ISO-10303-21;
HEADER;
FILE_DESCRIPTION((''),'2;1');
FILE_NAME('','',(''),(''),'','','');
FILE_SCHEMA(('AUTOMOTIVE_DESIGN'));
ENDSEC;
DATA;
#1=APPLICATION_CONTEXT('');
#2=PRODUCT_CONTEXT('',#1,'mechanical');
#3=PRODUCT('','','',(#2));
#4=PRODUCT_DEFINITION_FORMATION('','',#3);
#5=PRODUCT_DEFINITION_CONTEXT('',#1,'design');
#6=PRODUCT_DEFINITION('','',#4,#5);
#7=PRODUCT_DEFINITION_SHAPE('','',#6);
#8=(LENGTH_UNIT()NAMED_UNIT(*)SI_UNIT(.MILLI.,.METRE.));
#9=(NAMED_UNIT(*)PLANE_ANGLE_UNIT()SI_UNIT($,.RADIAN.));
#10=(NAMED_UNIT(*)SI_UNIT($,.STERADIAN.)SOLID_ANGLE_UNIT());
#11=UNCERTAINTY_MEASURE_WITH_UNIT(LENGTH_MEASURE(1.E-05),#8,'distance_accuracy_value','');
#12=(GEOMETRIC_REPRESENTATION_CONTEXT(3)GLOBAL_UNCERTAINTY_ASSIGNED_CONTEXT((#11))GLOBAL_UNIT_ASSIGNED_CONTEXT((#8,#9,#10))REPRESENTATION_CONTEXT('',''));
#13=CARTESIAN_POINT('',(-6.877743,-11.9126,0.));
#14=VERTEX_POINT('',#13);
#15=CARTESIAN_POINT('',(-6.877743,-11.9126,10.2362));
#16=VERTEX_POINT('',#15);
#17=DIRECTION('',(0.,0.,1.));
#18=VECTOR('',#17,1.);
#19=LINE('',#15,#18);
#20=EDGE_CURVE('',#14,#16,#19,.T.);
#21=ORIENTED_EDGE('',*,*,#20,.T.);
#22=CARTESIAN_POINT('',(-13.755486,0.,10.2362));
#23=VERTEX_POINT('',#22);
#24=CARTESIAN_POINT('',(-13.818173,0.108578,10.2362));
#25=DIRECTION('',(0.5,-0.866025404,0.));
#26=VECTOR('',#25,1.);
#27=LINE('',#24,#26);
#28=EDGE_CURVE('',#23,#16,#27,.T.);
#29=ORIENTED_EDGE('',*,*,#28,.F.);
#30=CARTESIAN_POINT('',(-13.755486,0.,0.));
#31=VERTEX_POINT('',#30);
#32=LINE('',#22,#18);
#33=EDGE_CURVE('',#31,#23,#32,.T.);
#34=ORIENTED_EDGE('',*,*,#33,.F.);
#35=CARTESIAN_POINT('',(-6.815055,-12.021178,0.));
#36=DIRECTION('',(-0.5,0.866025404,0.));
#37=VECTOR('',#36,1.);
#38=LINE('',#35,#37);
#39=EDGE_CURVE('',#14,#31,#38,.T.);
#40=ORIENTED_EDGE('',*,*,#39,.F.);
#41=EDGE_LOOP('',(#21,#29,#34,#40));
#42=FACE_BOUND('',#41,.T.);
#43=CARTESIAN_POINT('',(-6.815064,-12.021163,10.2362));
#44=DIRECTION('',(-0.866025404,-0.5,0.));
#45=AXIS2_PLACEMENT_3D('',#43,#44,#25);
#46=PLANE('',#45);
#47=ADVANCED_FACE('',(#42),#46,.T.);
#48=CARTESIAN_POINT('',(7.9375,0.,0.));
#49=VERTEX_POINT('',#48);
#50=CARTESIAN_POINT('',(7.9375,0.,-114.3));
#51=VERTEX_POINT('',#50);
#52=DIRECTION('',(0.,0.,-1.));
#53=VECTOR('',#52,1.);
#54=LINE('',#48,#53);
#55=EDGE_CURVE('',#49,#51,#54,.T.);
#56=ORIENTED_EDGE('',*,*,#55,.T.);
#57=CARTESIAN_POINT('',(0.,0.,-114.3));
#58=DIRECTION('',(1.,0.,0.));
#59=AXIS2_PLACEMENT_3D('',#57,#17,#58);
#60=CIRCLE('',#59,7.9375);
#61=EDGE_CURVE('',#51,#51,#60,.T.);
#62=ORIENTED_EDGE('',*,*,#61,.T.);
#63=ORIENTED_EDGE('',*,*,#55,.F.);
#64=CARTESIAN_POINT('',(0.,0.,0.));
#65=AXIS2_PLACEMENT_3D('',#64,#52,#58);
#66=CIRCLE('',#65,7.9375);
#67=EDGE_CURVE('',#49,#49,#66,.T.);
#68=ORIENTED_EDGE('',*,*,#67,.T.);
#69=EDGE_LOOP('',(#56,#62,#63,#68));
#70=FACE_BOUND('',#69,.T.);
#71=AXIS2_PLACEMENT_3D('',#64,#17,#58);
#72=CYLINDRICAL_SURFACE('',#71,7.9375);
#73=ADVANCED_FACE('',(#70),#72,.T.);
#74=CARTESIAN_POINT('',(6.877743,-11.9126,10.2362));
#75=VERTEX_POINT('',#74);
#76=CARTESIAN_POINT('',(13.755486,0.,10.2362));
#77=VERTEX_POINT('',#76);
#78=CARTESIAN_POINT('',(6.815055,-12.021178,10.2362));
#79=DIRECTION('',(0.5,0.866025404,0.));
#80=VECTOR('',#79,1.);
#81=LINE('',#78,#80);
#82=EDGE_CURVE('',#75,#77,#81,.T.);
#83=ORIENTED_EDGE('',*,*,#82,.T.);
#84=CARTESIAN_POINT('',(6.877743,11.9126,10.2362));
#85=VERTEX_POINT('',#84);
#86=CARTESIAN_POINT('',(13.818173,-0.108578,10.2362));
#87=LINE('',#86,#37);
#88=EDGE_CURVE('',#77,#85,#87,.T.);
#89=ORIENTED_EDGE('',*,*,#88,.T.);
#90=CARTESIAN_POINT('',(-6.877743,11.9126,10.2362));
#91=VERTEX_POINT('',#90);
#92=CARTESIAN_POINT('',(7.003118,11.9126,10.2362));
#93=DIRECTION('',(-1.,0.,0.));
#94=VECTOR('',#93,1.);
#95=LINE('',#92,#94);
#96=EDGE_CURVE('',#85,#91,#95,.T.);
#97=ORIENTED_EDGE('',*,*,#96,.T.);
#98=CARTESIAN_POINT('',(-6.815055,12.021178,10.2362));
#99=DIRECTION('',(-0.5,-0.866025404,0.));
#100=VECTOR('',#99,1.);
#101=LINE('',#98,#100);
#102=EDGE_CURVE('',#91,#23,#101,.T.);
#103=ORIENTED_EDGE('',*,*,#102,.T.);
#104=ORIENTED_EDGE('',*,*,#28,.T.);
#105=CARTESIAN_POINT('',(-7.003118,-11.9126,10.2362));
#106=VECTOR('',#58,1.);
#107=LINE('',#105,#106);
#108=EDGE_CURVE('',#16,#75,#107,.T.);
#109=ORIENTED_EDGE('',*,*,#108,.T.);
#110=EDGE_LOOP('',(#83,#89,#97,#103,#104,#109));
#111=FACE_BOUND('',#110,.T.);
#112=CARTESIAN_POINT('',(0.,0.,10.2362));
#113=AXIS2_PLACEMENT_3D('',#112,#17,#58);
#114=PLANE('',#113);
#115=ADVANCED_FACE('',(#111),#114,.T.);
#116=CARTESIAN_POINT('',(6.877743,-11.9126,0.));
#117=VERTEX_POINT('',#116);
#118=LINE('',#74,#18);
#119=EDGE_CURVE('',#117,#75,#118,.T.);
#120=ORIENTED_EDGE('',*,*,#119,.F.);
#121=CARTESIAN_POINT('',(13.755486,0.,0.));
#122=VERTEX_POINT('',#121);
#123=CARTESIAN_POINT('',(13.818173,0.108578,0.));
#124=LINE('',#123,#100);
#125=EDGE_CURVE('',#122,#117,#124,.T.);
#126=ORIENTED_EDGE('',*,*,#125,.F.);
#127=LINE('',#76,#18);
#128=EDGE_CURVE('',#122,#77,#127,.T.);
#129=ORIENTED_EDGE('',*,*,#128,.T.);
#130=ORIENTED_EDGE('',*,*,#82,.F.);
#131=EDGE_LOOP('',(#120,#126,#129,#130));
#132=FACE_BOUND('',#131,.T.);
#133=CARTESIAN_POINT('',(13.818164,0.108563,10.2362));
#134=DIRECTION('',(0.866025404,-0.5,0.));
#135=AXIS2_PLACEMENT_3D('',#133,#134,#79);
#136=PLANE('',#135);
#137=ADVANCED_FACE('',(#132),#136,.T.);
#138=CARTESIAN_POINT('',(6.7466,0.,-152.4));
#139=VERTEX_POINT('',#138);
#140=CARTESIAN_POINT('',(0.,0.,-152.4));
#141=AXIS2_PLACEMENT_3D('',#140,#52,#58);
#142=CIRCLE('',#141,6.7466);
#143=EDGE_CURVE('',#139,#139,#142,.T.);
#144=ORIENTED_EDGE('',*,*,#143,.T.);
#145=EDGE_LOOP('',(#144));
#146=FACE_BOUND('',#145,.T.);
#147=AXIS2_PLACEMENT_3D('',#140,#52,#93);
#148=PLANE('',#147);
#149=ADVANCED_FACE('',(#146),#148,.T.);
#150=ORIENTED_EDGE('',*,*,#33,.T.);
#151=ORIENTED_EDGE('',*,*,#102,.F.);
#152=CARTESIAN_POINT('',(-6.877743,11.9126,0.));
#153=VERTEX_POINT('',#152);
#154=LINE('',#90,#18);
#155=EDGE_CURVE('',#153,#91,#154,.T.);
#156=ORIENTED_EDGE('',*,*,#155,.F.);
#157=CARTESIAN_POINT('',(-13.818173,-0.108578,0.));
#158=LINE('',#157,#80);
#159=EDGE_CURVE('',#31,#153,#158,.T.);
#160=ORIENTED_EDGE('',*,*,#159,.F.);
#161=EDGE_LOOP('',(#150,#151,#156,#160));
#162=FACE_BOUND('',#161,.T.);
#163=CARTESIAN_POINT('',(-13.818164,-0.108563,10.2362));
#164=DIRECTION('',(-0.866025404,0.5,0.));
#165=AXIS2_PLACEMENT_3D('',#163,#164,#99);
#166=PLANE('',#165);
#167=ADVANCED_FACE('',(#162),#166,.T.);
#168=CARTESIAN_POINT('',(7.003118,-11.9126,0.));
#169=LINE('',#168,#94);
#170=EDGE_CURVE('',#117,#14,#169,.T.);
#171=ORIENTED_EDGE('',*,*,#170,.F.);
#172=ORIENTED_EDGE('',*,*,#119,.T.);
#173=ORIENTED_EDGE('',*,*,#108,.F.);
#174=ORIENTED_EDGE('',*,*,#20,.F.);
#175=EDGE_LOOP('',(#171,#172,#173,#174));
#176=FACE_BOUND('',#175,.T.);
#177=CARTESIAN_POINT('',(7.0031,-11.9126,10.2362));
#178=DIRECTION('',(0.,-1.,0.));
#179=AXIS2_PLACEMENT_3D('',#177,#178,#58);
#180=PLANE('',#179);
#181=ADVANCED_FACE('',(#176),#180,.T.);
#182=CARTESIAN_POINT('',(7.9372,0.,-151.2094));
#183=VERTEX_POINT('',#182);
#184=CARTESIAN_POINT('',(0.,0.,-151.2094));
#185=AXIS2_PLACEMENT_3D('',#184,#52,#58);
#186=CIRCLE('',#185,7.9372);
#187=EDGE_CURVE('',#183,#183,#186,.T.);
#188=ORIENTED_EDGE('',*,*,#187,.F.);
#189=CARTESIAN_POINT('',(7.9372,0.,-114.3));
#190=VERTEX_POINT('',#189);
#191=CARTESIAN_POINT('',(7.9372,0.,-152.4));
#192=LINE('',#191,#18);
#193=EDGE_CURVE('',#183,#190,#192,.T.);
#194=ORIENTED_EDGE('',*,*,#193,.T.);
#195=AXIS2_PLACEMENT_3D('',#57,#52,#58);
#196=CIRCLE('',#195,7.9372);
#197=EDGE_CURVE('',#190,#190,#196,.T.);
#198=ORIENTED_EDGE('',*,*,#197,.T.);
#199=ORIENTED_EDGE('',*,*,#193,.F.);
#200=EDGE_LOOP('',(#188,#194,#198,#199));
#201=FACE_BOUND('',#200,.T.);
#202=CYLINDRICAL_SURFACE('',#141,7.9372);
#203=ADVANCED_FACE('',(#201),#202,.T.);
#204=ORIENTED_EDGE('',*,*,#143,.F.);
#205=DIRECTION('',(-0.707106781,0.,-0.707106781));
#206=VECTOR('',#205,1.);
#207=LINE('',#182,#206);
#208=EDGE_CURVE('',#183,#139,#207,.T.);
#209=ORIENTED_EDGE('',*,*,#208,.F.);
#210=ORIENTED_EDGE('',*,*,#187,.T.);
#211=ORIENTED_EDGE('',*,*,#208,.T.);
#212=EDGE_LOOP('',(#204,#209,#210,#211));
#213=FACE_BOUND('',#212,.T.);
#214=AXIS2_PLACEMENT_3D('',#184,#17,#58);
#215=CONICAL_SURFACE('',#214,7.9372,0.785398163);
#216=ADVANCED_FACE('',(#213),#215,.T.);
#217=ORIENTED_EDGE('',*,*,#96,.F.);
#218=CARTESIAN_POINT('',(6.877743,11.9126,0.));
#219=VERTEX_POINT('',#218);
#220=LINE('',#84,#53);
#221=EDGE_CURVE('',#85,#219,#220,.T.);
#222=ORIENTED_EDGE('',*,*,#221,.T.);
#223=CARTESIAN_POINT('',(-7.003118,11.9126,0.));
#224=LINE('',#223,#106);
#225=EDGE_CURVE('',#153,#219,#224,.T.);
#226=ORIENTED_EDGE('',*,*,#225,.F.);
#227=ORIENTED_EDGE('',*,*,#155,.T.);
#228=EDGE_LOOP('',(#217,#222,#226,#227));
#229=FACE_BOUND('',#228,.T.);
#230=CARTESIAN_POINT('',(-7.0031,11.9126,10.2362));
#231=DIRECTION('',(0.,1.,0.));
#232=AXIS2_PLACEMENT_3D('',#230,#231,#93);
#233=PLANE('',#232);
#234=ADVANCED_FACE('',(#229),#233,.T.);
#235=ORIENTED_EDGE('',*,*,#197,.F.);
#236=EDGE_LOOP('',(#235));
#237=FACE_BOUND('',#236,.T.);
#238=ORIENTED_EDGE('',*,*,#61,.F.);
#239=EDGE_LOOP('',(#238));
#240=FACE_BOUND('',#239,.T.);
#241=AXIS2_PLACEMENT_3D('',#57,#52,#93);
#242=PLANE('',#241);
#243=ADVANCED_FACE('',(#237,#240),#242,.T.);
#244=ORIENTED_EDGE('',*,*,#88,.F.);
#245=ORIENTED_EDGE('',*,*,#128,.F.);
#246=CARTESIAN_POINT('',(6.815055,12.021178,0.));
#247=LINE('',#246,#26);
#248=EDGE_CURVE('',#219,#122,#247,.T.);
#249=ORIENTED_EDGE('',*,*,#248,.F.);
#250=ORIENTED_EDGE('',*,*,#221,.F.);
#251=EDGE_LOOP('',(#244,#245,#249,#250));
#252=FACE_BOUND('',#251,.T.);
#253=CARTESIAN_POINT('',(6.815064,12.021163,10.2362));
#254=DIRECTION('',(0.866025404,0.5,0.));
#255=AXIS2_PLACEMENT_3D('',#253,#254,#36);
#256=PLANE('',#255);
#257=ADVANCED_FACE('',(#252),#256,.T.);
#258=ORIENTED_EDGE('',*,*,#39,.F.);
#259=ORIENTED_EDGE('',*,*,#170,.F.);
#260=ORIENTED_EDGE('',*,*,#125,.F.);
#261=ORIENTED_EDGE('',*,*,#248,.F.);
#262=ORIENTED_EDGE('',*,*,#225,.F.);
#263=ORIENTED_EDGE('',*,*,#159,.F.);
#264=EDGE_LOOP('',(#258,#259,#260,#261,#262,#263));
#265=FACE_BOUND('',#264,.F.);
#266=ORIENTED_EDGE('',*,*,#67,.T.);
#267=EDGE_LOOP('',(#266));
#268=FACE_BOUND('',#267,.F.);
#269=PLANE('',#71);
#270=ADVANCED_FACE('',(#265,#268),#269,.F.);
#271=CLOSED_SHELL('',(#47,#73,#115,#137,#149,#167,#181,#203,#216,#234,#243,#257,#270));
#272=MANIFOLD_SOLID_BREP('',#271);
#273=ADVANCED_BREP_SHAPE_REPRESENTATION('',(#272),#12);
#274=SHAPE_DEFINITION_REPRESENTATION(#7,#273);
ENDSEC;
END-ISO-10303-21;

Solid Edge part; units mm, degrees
sketch "Sketch1" plane through (0, 0, 0) normal (0, 0, 1) x (1, 0, 0)
  circle A0 centre (0, 0) radius 13.8186
  dimension "D1" = 27.6372
extrude "Protrusion1" add sketch "Sketch1" along normal blind 10.2362
sketch "Sketch2" plane through (0, 0, 0) normal (0, 0, -1) x (1, 0, 0)
  circle A0 centre (0, 0) radius 7.9375
extrude "Protrusion2" add sketch "Sketch2" along normal blind 152.4
sketch "Sketch3" plane through (0, 0, -152.4) normal (0, 0, -1) x (1, 0, 0)
  circle A0 centre (0, 0) radius 7.9372
extrude "Cutout1" cut sketch "Sketch3" against normal blind 38.1 flip side to cut
chamfer "Chamfer_1" distance 1.1906 angle 45 1 edges at (-7.9372, 0, -152.4)
sketch "Sketch4" plane through (0, 0, 10.2362) normal (0, 0, 1) x (1, 0, 0)
  line L0 (-7.0031, 11.9126) -> (7.0031, 11.9126)
  dimension "D1" = 23.8252
extrude "Cutout2" cut sketch "Sketch4" against normal up to next material side at (0, 11.9626, 10.2362)
pattern_circular "Pattern1" count 6 over 360 about axis through (0, 0, 10.2362) along (0, 0, 1) of "Cutout2"
properties part number "24102225"
